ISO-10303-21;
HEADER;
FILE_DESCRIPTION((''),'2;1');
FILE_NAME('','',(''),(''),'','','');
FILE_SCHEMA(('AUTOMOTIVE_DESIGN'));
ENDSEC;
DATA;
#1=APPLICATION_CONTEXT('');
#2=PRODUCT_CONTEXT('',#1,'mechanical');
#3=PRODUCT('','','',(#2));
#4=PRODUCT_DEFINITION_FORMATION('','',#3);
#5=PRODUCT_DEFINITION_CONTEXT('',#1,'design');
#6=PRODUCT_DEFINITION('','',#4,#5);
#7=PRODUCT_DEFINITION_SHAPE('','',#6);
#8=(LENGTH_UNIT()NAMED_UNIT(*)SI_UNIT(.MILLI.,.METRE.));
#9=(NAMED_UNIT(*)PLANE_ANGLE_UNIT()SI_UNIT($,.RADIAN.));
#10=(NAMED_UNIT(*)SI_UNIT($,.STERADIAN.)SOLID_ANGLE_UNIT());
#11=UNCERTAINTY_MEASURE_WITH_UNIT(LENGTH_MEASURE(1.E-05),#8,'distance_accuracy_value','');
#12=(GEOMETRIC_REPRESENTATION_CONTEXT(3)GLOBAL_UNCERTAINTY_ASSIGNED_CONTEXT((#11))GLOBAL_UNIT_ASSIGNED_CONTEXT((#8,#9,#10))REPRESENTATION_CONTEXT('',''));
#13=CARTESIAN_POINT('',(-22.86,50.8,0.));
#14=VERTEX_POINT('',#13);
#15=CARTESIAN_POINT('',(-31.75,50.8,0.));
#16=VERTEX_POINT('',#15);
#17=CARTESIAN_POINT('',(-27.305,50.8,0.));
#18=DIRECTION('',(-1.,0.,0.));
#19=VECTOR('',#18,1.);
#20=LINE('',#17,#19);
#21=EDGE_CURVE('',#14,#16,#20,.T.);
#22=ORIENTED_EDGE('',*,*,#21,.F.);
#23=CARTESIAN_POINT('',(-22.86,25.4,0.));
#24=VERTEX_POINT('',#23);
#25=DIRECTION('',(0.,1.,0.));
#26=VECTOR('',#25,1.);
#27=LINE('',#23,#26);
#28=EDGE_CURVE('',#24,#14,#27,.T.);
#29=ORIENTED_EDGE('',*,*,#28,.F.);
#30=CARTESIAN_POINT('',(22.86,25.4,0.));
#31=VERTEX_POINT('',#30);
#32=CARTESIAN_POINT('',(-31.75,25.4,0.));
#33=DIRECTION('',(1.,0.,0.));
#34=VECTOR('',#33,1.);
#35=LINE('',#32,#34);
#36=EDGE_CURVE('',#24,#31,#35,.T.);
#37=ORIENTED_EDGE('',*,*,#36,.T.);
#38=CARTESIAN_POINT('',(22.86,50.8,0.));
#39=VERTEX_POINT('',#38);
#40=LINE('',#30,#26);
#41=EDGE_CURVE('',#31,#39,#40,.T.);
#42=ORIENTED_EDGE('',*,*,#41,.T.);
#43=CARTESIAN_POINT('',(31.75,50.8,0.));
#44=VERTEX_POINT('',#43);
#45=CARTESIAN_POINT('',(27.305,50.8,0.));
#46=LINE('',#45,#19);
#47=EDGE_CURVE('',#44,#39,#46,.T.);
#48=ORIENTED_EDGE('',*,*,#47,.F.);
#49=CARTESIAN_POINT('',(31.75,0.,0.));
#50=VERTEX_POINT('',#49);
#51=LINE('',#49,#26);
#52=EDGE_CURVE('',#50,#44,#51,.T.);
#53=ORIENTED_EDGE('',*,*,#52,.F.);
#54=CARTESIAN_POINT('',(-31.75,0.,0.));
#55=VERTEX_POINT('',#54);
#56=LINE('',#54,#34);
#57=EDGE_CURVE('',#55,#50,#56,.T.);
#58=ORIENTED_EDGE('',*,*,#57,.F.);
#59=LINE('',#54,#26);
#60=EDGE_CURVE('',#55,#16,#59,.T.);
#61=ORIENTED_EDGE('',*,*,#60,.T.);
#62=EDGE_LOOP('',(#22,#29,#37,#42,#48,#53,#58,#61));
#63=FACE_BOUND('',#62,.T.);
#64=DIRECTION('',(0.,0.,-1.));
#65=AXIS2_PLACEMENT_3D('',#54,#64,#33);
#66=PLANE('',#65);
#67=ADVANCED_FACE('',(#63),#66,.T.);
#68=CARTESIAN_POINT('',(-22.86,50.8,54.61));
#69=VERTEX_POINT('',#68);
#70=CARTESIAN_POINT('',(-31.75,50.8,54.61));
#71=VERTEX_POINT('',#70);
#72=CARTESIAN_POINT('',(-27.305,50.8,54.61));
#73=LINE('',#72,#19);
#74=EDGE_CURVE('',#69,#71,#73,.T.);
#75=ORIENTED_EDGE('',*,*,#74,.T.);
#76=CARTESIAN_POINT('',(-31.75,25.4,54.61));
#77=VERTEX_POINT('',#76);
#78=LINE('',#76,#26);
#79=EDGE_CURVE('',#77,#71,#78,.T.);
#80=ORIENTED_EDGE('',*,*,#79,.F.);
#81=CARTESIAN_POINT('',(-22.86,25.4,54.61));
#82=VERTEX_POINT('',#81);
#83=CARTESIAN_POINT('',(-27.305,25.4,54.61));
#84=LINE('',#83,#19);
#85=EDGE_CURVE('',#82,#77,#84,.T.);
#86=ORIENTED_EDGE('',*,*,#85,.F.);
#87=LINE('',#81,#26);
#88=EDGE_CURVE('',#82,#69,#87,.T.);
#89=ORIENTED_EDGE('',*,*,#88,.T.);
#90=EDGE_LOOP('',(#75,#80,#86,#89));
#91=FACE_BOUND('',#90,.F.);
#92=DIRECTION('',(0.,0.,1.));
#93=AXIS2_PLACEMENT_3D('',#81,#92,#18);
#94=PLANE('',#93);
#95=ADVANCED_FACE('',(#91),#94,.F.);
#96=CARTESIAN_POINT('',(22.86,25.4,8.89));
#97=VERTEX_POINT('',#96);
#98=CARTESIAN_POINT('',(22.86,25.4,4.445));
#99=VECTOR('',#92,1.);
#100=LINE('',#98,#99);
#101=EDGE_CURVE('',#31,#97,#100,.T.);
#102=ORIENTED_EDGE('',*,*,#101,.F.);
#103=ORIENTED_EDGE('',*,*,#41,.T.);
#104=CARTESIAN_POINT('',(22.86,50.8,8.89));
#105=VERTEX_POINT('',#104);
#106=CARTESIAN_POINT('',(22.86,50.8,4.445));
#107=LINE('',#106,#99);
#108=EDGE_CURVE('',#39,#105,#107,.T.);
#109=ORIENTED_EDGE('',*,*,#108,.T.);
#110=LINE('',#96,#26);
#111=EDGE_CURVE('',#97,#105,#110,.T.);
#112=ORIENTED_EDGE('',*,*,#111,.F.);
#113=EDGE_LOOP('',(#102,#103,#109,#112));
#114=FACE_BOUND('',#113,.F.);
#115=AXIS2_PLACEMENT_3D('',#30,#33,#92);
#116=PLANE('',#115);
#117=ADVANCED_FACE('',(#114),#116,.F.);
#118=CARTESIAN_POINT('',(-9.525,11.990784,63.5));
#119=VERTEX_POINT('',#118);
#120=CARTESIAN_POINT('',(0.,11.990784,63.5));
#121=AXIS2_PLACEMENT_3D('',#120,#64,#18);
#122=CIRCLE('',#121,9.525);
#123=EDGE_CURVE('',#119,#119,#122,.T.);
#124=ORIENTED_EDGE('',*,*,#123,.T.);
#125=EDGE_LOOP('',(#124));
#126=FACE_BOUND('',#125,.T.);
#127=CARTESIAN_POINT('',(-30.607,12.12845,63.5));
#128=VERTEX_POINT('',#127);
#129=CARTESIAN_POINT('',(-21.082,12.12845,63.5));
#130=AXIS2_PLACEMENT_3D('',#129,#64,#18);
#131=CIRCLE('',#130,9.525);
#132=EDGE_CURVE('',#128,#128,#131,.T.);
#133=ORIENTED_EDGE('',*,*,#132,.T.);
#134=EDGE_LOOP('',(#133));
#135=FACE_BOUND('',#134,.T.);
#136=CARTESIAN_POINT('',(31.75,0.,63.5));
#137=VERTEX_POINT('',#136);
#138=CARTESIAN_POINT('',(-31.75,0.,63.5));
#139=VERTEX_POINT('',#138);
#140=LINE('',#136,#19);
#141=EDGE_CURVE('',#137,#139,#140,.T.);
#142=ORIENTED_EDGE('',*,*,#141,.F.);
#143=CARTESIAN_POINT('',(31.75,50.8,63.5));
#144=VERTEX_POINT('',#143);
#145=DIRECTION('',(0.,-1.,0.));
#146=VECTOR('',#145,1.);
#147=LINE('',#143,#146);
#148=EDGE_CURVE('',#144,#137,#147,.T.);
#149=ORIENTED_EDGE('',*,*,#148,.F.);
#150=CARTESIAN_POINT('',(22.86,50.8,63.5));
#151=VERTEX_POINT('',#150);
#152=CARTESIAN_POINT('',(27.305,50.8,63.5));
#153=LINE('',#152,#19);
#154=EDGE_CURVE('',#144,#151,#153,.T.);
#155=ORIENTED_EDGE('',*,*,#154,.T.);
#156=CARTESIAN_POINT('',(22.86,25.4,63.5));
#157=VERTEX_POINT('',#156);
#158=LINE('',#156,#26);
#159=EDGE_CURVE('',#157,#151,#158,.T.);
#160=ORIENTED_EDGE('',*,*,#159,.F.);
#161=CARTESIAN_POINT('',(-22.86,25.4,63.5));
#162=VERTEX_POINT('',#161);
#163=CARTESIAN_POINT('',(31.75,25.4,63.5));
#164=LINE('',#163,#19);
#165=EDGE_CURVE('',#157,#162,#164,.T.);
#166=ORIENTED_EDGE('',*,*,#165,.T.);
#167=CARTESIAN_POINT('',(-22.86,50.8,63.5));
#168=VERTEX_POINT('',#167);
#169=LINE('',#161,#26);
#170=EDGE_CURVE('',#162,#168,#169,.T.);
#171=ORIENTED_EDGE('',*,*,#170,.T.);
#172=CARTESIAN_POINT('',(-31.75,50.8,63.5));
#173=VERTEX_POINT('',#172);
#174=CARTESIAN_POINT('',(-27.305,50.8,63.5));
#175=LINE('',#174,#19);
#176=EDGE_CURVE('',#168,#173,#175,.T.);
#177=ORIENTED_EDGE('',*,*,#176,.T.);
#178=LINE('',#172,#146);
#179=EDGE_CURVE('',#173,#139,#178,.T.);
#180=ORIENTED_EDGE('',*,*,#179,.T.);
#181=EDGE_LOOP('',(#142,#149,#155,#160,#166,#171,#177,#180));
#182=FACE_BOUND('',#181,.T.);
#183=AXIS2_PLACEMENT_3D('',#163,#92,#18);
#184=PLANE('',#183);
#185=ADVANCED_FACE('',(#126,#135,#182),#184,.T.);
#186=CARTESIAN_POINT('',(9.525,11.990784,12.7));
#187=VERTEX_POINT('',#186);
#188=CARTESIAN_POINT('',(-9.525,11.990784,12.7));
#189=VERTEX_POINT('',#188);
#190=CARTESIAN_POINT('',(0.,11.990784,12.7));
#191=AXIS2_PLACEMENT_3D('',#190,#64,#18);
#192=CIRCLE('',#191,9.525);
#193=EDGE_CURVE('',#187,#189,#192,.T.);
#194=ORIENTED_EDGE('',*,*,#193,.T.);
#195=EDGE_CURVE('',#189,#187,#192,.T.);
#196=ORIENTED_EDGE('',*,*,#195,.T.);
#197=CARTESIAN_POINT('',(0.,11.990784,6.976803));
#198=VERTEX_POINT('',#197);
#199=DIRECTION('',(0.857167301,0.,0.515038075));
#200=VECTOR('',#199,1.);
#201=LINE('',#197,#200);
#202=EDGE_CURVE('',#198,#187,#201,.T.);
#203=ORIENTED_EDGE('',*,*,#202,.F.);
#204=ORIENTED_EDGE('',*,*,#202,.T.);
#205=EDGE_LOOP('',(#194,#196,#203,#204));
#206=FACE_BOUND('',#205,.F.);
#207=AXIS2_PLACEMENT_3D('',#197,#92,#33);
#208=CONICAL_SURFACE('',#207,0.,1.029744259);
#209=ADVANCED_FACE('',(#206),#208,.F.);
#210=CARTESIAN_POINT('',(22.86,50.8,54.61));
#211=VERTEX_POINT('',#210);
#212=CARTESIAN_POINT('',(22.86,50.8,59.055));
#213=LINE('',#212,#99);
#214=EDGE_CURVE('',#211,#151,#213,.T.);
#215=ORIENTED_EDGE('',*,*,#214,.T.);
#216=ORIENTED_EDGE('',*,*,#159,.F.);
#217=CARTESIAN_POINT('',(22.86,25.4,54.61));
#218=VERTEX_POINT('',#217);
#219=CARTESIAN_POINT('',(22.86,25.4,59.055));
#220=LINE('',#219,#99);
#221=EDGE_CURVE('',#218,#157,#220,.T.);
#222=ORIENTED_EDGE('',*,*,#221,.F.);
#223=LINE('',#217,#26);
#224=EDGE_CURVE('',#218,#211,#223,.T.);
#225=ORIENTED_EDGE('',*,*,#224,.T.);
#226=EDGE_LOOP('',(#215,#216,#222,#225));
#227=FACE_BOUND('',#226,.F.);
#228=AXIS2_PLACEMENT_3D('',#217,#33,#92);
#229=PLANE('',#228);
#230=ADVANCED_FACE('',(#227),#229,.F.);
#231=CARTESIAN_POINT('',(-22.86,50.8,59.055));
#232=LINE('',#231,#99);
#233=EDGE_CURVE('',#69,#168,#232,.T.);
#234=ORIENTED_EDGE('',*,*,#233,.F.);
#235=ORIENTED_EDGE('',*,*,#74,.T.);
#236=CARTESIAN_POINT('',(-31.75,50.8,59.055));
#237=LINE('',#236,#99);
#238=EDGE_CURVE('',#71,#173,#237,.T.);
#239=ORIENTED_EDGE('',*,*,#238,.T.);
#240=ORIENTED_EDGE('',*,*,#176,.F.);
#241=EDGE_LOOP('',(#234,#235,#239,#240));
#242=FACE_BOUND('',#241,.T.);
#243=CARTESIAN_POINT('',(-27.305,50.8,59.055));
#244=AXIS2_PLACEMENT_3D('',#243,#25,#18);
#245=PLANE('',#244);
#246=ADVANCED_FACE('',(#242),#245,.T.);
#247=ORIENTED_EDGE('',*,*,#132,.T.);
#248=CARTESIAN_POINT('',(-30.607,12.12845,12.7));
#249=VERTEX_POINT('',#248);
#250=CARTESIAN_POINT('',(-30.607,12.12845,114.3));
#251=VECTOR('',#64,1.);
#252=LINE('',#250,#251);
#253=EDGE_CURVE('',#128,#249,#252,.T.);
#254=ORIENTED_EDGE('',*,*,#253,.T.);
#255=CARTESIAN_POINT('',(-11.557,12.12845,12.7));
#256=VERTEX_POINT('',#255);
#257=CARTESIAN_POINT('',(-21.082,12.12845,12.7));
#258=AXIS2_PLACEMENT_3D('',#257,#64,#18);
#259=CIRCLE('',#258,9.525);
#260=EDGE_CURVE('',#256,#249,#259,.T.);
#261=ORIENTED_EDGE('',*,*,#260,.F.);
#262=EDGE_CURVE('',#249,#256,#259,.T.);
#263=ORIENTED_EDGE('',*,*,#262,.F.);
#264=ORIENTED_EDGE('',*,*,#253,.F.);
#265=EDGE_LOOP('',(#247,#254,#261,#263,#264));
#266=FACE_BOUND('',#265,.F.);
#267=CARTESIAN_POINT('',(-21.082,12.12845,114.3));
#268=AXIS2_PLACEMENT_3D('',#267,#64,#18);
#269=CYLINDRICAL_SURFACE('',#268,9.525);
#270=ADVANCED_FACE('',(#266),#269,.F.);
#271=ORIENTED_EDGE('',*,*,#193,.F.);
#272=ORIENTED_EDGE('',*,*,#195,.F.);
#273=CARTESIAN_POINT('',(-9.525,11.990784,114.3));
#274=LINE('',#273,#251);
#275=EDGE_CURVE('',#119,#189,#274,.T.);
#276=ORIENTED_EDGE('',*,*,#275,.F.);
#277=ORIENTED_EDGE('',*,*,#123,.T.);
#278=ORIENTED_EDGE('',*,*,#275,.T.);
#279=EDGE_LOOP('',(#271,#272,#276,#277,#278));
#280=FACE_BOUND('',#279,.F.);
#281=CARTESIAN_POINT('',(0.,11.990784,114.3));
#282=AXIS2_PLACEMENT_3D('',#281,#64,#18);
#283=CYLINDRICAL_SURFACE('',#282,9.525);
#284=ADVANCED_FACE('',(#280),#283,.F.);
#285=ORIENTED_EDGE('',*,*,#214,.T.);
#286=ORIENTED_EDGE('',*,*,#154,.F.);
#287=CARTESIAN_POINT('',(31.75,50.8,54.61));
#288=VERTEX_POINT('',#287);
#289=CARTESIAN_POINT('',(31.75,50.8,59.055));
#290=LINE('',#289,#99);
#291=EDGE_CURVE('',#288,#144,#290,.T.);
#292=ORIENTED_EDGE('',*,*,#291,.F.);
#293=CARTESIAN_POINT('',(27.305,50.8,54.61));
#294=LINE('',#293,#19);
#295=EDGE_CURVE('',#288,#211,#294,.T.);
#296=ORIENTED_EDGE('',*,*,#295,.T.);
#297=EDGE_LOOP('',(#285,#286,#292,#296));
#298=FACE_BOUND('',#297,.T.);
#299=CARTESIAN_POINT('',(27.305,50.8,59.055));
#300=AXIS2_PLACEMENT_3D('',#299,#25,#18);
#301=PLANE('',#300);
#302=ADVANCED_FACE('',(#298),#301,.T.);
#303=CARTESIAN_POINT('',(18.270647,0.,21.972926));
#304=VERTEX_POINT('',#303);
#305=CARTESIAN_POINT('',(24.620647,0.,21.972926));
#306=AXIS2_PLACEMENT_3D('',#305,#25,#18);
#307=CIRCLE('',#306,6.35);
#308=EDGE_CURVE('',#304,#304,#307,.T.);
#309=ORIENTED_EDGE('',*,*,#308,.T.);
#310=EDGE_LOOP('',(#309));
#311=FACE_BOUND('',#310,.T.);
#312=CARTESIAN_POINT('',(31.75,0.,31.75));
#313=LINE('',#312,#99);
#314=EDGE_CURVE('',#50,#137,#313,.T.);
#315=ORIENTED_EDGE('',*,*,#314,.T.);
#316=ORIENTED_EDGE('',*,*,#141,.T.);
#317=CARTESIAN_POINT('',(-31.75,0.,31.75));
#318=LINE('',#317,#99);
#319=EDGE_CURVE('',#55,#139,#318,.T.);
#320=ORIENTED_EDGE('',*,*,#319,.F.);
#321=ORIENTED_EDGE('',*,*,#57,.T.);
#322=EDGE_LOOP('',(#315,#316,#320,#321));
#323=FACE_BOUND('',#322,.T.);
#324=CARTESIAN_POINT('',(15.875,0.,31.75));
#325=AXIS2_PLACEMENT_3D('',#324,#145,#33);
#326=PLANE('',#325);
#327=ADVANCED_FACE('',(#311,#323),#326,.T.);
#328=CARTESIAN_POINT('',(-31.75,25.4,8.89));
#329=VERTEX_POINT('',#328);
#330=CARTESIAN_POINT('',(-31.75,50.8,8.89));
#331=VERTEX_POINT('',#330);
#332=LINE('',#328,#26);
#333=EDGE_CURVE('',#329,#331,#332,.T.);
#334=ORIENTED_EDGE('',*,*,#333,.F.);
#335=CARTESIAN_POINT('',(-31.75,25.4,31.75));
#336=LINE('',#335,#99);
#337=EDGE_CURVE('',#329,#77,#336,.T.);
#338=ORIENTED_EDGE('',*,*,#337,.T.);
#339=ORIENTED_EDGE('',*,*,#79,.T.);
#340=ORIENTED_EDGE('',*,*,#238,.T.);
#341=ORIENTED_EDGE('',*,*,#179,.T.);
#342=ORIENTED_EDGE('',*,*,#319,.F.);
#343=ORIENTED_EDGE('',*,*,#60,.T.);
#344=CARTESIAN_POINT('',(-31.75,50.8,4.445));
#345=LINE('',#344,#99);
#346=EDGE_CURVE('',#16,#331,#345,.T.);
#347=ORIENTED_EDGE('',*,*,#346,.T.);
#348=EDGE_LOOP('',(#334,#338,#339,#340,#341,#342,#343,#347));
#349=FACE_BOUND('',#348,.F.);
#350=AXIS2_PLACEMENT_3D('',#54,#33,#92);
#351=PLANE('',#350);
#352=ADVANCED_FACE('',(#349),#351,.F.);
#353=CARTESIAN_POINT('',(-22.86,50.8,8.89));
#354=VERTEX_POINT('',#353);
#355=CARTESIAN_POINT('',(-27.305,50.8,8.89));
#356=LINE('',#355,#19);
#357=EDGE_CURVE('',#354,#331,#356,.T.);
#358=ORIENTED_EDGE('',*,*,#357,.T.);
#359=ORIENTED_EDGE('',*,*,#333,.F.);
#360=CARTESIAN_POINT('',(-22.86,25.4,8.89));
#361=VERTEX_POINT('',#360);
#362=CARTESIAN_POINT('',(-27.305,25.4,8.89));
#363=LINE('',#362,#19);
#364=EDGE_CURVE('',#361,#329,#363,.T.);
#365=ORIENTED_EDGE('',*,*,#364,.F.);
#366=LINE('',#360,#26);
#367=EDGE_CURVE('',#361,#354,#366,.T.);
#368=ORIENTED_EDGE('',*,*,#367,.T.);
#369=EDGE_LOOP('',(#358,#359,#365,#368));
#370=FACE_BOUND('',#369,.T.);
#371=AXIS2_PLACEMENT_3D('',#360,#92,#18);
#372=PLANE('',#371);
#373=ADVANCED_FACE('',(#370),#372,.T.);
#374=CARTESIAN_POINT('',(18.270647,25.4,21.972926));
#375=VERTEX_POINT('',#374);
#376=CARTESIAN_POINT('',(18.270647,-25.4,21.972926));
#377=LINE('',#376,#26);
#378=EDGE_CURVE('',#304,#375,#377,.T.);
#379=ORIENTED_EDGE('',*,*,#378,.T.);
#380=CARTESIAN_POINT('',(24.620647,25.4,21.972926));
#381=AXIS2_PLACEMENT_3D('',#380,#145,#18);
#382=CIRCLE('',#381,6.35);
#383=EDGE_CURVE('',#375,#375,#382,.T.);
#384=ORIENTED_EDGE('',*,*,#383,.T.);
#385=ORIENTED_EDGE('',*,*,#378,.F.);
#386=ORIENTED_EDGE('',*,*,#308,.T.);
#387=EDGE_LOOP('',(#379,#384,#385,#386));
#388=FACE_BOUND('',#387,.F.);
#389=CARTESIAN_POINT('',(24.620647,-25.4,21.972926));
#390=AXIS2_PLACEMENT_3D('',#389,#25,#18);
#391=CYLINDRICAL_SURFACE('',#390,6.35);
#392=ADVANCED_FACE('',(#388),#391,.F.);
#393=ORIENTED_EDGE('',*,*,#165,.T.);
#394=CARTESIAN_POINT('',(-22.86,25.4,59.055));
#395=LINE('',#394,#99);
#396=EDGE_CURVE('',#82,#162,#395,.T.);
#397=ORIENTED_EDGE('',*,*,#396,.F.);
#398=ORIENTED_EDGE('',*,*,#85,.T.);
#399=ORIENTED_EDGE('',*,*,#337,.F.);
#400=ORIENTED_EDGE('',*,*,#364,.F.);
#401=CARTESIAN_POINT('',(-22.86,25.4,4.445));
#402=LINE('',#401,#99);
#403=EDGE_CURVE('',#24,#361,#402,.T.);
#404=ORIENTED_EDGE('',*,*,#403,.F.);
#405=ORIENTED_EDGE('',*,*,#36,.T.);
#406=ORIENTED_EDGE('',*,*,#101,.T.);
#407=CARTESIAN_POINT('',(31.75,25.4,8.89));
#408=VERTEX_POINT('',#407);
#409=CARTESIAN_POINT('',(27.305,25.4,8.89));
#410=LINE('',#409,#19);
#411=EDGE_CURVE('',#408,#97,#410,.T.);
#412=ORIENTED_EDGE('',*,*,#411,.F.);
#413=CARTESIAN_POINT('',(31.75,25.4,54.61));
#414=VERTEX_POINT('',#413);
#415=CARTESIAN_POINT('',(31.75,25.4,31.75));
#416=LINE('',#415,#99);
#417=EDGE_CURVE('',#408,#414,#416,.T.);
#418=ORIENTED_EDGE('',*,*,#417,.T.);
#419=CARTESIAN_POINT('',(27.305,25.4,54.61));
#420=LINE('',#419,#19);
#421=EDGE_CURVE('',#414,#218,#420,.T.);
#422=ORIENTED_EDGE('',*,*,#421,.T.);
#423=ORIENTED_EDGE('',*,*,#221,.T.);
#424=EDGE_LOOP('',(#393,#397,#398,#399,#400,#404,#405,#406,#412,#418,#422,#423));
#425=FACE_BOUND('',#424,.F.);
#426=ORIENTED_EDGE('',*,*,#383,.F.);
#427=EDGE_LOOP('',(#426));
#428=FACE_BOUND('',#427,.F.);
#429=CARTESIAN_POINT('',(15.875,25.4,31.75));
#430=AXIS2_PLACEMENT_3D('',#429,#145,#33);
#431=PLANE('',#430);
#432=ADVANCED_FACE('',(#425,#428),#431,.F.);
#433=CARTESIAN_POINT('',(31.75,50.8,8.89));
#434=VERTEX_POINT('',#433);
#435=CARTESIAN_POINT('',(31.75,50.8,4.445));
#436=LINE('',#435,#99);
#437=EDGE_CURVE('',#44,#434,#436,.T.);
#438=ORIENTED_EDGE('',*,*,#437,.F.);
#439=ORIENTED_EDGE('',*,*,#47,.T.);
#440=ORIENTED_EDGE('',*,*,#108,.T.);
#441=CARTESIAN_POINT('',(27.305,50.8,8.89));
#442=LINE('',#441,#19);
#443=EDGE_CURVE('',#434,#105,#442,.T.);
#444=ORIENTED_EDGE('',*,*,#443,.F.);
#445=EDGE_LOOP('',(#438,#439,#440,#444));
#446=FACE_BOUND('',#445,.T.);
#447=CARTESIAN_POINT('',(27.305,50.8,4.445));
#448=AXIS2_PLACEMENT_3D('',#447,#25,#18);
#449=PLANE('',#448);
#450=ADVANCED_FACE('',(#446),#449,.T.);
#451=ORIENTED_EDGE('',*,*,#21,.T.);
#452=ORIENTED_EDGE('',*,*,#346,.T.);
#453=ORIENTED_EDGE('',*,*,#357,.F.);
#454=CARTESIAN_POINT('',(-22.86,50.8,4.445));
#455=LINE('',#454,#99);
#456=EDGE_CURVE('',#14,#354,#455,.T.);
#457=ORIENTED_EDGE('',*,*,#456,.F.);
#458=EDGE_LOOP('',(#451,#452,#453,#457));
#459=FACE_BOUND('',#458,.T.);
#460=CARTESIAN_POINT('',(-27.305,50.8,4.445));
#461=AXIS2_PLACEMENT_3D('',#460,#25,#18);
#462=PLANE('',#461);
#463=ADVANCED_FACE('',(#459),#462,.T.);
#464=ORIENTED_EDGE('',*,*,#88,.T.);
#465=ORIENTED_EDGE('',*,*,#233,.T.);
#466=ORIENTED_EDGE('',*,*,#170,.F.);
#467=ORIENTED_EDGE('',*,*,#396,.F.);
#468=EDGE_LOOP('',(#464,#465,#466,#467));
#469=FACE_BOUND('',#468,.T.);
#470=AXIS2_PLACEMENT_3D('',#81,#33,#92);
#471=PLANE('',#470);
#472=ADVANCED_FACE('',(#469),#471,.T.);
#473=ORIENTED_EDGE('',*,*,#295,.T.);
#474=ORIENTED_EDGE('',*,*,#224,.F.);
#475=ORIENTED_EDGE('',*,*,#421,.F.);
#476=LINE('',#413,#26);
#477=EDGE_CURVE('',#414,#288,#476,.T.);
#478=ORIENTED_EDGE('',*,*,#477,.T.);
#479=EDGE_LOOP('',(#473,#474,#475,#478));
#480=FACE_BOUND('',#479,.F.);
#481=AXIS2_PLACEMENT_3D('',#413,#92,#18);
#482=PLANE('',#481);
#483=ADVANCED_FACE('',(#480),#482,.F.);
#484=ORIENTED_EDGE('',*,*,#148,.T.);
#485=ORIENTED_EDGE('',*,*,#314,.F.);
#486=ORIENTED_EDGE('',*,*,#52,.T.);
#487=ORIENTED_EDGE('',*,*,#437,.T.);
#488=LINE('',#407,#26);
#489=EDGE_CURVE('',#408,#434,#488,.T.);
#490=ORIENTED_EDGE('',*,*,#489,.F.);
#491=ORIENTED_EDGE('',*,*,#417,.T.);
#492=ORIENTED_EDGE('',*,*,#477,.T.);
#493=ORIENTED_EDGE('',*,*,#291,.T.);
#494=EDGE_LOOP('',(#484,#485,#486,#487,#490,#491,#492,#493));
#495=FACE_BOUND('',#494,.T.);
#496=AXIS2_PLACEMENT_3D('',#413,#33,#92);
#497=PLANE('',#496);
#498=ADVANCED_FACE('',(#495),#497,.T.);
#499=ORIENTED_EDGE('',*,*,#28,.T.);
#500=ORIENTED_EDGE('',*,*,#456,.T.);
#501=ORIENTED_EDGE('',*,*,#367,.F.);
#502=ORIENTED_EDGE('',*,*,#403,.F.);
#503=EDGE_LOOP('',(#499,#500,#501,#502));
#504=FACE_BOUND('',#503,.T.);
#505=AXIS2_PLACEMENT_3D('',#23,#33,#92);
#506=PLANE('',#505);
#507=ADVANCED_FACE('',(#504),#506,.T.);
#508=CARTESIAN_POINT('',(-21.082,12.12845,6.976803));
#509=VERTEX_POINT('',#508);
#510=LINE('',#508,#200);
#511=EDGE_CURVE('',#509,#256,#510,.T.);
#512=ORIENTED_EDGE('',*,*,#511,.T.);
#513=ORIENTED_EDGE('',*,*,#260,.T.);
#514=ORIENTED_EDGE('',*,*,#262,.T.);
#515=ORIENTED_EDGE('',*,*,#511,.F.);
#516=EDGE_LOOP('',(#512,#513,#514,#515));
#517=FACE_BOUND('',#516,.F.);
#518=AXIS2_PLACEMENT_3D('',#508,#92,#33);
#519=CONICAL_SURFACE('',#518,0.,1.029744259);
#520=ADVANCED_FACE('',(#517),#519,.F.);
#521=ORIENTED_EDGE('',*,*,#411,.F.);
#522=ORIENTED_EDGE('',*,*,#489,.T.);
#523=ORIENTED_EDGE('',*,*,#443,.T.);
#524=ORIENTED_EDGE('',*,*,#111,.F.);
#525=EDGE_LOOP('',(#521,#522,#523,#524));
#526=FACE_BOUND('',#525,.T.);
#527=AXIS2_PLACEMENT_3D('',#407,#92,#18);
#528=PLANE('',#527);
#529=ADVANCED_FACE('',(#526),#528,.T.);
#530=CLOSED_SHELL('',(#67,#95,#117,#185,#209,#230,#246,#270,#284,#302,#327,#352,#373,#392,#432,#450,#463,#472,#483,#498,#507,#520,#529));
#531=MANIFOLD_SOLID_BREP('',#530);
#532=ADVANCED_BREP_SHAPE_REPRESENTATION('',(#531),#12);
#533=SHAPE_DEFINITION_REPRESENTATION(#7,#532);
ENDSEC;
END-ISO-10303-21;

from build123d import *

# Parameters (mm, degrees)
F0_W     = 31.75
F0_H     = 63.5
F1_DEPTH = 25.4
F4_D     = 12.7
F4_DEPTH = 25.4
F4_TIP   = 3.8154649308
F5_W     = 8.89
F5_H     = 8.89
F6_DEPTH = 25.4
F7_D     = 19.05
F7_DEPTH = 50.8
F7_TIP   = 5.7231973962


# Not quite as in the source:
# - a feature names something its author has since deleted; it is built from what else it names


with BuildPart() as f1:
    # F0 (on Front) → F1 (new body)
    with BuildSketch(Plane.XZ):
        with Locations((15.875, 31.75)):
            Rectangle(F0_W, F0_H)
        with Locations((-15.875, 31.75)):
            Rectangle(F0_W, F0_H)
    extrude(amount=-F1_DEPTH)

    # F4
    with Locations(Plane.XZ):
        with Locations((24.6206466109, 21.9729263335)):
            Hole(F4_D / 2, depth=F4_DEPTH)
            with Locations((0, 0, -(F4_DEPTH + F4_TIP / 2))):  # 118° drill point
                Cone(0, F4_D / 2, F4_TIP, mode=Mode.SUBTRACT)

    # F5 (on face) → F6 (join)
    with BuildSketch(Plane(origin=(0, 25.4, 0), x_dir=(-1, 0, 0), z_dir=(0, 1, 0))):
        with Locations((-27.305, 59.055)):
            Rectangle(F5_W, F5_H)
        with Locations((27.305, 59.055)):
            Rectangle(F5_W, F5_H)
        with Locations((-27.305, 4.445)):
            Rectangle(F5_W, F5_H)
        with Locations((27.305, 4.445)):
            Rectangle(F5_W, F5_H)
    extrude(amount=F6_DEPTH)

    # F7
    with Locations(Plane.XY.offset(63.5)):
        with Locations((-21.082, 12.1284499764), (0, 11.9907837361)):
            Hole(F7_D / 2, depth=F7_DEPTH)
            with Locations((0, 0, -(F7_DEPTH + F7_TIP / 2))):  # 118° drill point
                Cone(0, F7_D / 2, F7_TIP, mode=Mode.SUBTRACT)


solid = f1.part
